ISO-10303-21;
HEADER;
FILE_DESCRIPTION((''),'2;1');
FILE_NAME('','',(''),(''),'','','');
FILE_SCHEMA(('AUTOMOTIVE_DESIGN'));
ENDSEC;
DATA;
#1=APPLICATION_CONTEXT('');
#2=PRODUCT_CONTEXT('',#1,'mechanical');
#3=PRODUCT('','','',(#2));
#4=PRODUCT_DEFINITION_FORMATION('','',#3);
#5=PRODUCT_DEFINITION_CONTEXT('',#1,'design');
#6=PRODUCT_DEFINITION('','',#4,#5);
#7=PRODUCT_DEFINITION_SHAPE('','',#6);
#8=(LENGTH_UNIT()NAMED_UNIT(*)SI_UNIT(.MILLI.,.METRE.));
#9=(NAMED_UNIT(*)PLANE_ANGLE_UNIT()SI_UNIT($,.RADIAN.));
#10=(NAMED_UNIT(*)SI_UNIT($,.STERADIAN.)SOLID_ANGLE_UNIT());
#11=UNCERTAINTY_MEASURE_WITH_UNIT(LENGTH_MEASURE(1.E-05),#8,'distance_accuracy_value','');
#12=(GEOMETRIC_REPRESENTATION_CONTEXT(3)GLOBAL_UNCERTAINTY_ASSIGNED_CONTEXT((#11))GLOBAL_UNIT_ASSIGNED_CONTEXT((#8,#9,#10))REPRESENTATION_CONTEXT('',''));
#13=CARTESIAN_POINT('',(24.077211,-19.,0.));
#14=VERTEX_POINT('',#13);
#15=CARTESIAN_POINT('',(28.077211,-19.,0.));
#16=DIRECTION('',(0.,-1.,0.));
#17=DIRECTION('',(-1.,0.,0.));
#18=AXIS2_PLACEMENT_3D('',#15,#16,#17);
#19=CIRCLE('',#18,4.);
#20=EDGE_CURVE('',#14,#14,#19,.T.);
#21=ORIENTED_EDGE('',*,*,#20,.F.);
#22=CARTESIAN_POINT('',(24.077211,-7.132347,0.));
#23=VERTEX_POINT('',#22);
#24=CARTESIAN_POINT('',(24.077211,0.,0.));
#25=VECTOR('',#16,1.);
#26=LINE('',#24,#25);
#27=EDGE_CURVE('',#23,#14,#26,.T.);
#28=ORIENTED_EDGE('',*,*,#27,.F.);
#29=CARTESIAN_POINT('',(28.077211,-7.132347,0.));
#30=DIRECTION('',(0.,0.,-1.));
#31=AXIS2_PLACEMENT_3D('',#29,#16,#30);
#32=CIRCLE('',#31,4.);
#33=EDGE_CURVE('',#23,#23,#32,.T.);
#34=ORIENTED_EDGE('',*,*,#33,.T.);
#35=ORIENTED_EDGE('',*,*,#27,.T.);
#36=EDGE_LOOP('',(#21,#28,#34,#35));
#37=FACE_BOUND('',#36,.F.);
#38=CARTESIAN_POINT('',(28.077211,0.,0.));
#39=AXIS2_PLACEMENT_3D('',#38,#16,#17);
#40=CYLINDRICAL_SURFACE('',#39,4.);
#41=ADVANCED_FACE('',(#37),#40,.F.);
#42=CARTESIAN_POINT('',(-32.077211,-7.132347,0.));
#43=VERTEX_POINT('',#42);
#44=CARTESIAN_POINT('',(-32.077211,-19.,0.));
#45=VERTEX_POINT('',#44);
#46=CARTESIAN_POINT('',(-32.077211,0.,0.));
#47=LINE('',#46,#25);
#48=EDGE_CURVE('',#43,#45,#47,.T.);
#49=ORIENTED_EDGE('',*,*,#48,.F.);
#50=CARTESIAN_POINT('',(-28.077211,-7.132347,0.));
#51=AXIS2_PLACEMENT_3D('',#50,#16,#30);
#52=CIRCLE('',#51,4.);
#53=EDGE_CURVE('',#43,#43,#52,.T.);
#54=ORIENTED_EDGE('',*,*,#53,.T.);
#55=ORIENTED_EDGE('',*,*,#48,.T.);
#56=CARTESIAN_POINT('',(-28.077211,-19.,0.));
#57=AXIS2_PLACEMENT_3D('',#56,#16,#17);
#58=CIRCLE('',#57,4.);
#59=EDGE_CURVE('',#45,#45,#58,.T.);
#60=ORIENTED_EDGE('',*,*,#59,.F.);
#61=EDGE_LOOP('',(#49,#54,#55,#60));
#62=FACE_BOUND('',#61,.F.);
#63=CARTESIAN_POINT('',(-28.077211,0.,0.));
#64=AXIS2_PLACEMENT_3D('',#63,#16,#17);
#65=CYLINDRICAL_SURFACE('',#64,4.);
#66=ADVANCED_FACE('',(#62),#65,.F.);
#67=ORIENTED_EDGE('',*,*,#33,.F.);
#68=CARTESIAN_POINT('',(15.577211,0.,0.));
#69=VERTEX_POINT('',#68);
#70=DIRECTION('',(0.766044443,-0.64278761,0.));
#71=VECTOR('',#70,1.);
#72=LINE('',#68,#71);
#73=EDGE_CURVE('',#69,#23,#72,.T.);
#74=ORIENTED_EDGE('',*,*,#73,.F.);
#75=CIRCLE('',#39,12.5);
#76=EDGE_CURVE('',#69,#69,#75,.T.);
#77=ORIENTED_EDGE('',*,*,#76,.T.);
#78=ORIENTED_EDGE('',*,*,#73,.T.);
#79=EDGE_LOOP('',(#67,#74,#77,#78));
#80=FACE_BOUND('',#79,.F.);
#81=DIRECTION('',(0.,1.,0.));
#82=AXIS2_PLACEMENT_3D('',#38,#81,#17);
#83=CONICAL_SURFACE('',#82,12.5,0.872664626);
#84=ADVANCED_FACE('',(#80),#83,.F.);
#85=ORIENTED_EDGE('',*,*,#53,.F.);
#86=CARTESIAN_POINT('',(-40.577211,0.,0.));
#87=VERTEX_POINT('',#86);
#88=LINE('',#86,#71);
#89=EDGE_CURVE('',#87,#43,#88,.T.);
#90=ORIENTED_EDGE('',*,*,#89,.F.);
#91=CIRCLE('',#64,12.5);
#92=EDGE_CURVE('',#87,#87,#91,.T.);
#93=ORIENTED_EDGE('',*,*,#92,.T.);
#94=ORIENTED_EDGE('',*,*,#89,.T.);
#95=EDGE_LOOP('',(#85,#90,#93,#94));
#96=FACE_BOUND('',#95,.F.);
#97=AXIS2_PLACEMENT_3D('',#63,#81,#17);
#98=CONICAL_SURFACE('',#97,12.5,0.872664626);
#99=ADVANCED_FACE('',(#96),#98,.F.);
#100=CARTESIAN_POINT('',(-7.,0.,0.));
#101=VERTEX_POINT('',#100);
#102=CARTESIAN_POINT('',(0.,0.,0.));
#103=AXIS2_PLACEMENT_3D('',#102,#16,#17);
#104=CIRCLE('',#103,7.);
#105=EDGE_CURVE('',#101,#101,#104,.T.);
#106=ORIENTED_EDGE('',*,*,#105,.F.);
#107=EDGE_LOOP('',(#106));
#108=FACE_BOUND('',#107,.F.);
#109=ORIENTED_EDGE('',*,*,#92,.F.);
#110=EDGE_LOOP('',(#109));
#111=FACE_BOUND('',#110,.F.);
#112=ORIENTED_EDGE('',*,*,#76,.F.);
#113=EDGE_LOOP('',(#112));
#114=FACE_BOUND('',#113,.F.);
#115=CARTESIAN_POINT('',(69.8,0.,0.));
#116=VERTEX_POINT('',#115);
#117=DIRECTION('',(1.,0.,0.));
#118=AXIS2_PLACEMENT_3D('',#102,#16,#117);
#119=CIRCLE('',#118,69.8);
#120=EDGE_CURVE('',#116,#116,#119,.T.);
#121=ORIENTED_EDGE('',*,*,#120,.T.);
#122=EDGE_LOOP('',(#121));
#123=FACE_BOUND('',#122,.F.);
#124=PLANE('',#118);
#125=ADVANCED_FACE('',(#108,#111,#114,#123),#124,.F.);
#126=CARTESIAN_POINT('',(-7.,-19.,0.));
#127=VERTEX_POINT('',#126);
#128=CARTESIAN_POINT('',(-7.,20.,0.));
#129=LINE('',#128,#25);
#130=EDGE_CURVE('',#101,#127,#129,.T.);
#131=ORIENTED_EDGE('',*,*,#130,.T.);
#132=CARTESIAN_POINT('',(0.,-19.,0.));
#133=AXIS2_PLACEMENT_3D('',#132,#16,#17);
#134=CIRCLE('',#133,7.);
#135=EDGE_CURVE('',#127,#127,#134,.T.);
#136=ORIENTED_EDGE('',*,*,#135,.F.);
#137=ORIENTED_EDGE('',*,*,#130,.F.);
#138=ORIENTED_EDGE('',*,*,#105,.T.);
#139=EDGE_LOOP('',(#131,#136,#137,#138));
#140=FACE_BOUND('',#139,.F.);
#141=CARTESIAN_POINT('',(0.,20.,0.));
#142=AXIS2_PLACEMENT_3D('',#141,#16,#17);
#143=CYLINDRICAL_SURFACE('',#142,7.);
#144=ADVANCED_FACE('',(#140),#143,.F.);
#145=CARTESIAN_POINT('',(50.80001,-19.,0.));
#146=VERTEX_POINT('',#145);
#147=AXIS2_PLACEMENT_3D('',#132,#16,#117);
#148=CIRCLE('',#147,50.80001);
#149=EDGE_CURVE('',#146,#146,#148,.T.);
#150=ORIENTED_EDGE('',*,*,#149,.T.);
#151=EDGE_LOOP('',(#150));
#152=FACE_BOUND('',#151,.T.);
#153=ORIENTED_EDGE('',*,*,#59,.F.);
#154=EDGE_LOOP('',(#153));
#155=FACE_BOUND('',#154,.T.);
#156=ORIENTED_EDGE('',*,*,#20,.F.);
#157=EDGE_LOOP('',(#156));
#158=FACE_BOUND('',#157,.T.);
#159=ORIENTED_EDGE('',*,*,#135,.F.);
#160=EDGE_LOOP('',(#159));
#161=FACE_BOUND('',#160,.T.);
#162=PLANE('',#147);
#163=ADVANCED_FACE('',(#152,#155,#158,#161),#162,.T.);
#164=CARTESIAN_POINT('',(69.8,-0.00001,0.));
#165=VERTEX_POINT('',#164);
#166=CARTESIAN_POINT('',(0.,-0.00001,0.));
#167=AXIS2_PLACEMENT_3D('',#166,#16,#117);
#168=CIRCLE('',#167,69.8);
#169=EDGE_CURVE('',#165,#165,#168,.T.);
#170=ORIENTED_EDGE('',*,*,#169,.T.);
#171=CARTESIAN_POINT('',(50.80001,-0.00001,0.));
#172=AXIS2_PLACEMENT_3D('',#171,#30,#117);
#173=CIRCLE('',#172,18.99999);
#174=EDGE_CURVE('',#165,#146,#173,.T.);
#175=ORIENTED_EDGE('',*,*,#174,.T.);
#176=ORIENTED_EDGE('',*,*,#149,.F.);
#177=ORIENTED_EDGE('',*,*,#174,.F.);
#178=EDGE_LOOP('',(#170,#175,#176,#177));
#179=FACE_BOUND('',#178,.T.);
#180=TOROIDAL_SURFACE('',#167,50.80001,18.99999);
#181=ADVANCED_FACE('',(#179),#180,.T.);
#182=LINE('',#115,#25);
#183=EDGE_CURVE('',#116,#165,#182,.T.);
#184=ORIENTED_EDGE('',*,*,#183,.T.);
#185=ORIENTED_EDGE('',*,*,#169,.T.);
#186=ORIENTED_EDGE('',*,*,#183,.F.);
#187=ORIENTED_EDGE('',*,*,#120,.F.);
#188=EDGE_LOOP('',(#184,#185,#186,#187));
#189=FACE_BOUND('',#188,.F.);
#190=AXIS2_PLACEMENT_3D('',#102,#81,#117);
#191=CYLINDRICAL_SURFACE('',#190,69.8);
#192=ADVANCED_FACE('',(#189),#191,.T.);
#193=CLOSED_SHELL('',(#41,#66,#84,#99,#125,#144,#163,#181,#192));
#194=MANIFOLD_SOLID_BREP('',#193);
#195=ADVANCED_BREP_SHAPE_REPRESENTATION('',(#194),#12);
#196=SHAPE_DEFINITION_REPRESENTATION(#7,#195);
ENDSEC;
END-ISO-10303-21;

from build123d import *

# Parameters (mm, degrees)
F0_R           = 69.8
F0_R_2         = 5
F1_DEPTH       = 19
F2_R           = 18.99999
F3_D           = 14
F3_DEPTH       = 20
F3_TIP         = 4.2060243332
F4_D           = 8
F4_DEPTH       = 20
F4_CSINK_D     = 25
F4_CSINK_ANGLE = 100
F4_TIP         = 2.4034424761


# Not quite as in the source:
# - a fillet or chamfer is up to 0.001 mm smaller than in the source, because OpenCascade refuses the exact size


with BuildPart() as f1:
    # F0 (on Front) → F1 (new body)
    with BuildSketch(Plane.XZ):
        Circle(F0_R)
        with Locations((-28.077211231, 0)):
            Circle(F0_R_2, mode=Mode.SUBTRACT)
        with Locations((28.077211231, 0)):
            Circle(F0_R_2, mode=Mode.SUBTRACT)
        with Locations((-28.077211231, 0)):
            Circle(F0_R_2)
        with Locations((28.077211231, 0)):
            Circle(F0_R_2)
    extrude(amount=F1_DEPTH)

    # F2 (radius 19 in the source; OpenCascade refuses exactly that, so slightly less here)
    f2_edges = [f1.edges().sort_by_distance(p)[0] for p in [
        (-69.8, -19, 0),
    ]]
    fillet(f2_edges, radius=F2_R)

    # F3
    with Locations(Plane(origin=(0, 0, 0), x_dir=(1, 0, 0), z_dir=(0, 1, 0))):
        with Locations((0, 0)):
            Hole(F3_D / 2, depth=F3_DEPTH)
            with Locations((0, 0, -(F3_DEPTH + F3_TIP / 2))):  # 118° drill point
                Cone(0, F3_D / 2, F3_TIP, mode=Mode.SUBTRACT)

    # F4
    with Locations(Plane(origin=(0, 0, 0), x_dir=(1, 0, 0), z_dir=(0, 1, 0))):
        with Locations((28.077211231, 0), (-28.077211231, 0)):
            CounterSinkHole(F4_D / 2, F4_CSINK_D / 2, depth=F4_DEPTH, counter_sink_angle=F4_CSINK_ANGLE)
            with Locations((0, 0, -(F4_DEPTH + F4_TIP / 2))):  # 118° drill point
                Cone(0, F4_D / 2, F4_TIP, mode=Mode.SUBTRACT)


solid = f1.part
